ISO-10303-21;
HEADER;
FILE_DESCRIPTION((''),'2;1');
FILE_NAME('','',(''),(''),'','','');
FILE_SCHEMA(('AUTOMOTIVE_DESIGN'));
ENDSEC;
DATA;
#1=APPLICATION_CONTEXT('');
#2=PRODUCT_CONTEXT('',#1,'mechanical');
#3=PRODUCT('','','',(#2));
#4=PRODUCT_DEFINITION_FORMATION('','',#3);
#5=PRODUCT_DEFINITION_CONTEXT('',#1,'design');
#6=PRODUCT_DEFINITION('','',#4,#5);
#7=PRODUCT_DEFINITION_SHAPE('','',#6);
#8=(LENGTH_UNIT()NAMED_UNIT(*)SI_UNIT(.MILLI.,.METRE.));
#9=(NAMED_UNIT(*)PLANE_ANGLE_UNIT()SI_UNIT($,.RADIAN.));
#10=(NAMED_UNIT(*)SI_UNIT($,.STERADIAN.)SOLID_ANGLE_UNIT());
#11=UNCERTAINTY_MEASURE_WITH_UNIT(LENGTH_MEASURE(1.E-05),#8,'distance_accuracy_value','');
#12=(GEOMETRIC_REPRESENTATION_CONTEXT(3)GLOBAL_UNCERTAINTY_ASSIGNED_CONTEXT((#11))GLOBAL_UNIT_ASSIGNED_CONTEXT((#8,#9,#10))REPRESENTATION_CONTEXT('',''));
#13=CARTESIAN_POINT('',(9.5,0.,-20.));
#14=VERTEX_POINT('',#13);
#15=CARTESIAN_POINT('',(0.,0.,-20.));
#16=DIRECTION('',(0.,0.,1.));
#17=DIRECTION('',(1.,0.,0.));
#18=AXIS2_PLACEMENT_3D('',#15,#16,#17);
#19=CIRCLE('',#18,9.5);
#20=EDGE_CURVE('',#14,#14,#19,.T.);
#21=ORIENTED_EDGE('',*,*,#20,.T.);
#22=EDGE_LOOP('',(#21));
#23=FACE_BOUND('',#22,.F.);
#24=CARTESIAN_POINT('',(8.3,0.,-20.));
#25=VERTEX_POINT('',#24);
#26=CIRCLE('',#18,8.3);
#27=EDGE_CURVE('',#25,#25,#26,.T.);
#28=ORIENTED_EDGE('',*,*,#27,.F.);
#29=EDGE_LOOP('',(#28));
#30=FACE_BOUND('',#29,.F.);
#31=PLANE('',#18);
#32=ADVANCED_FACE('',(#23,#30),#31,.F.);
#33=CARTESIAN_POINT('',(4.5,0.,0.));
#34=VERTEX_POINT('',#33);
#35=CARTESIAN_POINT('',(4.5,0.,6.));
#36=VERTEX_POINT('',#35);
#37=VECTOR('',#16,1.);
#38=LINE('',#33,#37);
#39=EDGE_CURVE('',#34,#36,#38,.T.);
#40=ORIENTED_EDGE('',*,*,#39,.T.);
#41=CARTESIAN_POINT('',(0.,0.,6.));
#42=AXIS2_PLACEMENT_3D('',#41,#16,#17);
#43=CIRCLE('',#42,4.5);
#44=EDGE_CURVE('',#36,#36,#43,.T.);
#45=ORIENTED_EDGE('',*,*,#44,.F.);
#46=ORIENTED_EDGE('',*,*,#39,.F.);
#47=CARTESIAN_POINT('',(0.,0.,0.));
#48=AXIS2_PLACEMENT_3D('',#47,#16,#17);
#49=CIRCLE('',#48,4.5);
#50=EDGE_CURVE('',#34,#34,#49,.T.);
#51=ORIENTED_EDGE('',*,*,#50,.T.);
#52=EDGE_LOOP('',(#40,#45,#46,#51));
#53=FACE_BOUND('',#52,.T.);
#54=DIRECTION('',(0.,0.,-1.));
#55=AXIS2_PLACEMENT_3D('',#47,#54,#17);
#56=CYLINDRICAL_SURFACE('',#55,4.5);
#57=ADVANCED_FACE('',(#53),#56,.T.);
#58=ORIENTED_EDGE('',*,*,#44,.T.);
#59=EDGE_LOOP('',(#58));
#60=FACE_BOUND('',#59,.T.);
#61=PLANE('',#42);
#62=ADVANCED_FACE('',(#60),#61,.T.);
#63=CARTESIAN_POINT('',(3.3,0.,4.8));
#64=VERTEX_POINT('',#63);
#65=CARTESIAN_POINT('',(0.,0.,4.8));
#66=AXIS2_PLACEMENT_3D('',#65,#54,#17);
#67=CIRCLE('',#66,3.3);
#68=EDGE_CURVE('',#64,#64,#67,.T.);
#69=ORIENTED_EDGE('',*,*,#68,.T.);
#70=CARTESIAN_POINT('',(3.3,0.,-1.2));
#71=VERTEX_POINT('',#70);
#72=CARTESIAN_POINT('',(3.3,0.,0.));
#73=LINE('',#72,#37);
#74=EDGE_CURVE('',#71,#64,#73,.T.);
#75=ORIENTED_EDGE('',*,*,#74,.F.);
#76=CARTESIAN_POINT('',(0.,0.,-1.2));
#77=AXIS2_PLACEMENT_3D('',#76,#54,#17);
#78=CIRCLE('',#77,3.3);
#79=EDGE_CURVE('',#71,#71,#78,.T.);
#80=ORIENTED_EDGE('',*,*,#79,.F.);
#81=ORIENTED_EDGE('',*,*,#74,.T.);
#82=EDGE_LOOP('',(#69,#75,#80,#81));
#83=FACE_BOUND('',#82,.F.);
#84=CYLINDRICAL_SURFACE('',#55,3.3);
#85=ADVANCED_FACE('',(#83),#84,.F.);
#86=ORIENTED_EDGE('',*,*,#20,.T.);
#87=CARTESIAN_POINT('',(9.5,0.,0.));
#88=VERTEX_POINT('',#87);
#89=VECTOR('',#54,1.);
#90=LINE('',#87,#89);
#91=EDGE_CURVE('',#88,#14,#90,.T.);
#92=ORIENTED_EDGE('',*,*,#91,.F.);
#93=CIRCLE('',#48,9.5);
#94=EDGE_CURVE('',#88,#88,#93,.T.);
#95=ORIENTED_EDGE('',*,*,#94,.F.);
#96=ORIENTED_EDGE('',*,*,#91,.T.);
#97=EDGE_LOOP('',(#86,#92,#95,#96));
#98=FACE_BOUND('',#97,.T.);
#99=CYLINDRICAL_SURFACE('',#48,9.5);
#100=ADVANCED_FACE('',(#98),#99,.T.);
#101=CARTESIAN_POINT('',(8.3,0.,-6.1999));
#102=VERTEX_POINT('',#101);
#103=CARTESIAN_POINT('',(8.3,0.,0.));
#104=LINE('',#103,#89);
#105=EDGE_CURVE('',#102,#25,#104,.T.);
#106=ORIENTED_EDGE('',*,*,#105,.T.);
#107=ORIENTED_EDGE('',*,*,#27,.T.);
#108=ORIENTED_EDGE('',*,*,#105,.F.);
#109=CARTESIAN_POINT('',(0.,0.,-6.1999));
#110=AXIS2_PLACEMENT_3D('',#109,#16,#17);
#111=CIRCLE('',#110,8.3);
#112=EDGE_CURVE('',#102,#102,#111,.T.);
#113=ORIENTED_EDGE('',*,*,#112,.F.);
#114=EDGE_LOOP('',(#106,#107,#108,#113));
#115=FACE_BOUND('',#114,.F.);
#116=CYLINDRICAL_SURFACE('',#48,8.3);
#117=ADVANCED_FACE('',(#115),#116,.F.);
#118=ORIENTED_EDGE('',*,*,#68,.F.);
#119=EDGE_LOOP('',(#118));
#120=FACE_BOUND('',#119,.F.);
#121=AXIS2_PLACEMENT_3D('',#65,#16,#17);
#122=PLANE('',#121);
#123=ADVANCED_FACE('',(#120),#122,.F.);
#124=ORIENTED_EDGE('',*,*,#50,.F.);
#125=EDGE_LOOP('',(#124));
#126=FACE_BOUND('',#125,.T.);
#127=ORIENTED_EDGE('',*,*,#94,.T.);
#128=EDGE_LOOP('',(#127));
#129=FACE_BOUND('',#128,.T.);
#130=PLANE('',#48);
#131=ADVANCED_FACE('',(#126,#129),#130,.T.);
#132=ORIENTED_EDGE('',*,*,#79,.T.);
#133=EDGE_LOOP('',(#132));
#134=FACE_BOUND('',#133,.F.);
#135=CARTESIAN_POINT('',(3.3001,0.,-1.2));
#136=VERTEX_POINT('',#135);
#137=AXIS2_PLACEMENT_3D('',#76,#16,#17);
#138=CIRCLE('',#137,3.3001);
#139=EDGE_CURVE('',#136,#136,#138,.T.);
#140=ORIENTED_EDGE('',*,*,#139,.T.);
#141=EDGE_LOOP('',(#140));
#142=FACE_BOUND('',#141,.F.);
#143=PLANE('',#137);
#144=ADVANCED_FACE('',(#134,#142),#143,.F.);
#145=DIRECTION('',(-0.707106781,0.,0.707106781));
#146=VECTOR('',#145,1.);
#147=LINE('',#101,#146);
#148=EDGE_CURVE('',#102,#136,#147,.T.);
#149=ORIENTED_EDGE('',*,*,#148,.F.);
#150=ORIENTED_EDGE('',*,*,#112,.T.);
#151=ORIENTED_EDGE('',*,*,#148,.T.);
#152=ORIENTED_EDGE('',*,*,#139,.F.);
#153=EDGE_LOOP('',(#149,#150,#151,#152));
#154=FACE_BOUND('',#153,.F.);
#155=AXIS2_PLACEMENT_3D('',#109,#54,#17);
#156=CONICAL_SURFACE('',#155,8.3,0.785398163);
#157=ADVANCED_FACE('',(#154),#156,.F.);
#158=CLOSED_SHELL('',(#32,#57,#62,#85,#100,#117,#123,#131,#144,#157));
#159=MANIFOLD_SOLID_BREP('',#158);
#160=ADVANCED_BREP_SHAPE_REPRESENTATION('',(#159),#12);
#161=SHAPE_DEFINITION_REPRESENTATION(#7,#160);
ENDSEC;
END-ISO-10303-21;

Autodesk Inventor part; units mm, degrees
ref_plane "YZ Plane" through (0, 0, 0) normal (1, 0, 0) x (0, 1, 0)
ref_plane "XZ Plane" through (0, 0, 0) normal (0, 1, 0) x (-1, 0, 0)
ref_plane "XY Plane" through (0, 0, 0) normal (0, 0, 1) x (1, 0, 0)
sketch "Sketch1" plane through (0, 0, 0) normal (0, 0, 1) x (1, 0, 0)
  circle A0 centre (0, 0) radius 4.5
  circle A1 centre (0, 0) radius 9.5
  dimension "d0" = 9
  dimension "d1" = 19
extrude "Extrusion1" add sketch "Sketch1" against normal blind 20 contours A0 | A1
extrude "Extrusion2" add sketch "Sketch1" along normal blind 6 contours A0
shell "Shell1" thickness 1.2 removed faces 1 at (2.3703, -2.0999, -20)
chamfer "Chamfer1" distance 5 angle 45 1 edges at (-8.3, 0, -1.2)
properties part number "Marker Plunger" material "ABS Plastic"
